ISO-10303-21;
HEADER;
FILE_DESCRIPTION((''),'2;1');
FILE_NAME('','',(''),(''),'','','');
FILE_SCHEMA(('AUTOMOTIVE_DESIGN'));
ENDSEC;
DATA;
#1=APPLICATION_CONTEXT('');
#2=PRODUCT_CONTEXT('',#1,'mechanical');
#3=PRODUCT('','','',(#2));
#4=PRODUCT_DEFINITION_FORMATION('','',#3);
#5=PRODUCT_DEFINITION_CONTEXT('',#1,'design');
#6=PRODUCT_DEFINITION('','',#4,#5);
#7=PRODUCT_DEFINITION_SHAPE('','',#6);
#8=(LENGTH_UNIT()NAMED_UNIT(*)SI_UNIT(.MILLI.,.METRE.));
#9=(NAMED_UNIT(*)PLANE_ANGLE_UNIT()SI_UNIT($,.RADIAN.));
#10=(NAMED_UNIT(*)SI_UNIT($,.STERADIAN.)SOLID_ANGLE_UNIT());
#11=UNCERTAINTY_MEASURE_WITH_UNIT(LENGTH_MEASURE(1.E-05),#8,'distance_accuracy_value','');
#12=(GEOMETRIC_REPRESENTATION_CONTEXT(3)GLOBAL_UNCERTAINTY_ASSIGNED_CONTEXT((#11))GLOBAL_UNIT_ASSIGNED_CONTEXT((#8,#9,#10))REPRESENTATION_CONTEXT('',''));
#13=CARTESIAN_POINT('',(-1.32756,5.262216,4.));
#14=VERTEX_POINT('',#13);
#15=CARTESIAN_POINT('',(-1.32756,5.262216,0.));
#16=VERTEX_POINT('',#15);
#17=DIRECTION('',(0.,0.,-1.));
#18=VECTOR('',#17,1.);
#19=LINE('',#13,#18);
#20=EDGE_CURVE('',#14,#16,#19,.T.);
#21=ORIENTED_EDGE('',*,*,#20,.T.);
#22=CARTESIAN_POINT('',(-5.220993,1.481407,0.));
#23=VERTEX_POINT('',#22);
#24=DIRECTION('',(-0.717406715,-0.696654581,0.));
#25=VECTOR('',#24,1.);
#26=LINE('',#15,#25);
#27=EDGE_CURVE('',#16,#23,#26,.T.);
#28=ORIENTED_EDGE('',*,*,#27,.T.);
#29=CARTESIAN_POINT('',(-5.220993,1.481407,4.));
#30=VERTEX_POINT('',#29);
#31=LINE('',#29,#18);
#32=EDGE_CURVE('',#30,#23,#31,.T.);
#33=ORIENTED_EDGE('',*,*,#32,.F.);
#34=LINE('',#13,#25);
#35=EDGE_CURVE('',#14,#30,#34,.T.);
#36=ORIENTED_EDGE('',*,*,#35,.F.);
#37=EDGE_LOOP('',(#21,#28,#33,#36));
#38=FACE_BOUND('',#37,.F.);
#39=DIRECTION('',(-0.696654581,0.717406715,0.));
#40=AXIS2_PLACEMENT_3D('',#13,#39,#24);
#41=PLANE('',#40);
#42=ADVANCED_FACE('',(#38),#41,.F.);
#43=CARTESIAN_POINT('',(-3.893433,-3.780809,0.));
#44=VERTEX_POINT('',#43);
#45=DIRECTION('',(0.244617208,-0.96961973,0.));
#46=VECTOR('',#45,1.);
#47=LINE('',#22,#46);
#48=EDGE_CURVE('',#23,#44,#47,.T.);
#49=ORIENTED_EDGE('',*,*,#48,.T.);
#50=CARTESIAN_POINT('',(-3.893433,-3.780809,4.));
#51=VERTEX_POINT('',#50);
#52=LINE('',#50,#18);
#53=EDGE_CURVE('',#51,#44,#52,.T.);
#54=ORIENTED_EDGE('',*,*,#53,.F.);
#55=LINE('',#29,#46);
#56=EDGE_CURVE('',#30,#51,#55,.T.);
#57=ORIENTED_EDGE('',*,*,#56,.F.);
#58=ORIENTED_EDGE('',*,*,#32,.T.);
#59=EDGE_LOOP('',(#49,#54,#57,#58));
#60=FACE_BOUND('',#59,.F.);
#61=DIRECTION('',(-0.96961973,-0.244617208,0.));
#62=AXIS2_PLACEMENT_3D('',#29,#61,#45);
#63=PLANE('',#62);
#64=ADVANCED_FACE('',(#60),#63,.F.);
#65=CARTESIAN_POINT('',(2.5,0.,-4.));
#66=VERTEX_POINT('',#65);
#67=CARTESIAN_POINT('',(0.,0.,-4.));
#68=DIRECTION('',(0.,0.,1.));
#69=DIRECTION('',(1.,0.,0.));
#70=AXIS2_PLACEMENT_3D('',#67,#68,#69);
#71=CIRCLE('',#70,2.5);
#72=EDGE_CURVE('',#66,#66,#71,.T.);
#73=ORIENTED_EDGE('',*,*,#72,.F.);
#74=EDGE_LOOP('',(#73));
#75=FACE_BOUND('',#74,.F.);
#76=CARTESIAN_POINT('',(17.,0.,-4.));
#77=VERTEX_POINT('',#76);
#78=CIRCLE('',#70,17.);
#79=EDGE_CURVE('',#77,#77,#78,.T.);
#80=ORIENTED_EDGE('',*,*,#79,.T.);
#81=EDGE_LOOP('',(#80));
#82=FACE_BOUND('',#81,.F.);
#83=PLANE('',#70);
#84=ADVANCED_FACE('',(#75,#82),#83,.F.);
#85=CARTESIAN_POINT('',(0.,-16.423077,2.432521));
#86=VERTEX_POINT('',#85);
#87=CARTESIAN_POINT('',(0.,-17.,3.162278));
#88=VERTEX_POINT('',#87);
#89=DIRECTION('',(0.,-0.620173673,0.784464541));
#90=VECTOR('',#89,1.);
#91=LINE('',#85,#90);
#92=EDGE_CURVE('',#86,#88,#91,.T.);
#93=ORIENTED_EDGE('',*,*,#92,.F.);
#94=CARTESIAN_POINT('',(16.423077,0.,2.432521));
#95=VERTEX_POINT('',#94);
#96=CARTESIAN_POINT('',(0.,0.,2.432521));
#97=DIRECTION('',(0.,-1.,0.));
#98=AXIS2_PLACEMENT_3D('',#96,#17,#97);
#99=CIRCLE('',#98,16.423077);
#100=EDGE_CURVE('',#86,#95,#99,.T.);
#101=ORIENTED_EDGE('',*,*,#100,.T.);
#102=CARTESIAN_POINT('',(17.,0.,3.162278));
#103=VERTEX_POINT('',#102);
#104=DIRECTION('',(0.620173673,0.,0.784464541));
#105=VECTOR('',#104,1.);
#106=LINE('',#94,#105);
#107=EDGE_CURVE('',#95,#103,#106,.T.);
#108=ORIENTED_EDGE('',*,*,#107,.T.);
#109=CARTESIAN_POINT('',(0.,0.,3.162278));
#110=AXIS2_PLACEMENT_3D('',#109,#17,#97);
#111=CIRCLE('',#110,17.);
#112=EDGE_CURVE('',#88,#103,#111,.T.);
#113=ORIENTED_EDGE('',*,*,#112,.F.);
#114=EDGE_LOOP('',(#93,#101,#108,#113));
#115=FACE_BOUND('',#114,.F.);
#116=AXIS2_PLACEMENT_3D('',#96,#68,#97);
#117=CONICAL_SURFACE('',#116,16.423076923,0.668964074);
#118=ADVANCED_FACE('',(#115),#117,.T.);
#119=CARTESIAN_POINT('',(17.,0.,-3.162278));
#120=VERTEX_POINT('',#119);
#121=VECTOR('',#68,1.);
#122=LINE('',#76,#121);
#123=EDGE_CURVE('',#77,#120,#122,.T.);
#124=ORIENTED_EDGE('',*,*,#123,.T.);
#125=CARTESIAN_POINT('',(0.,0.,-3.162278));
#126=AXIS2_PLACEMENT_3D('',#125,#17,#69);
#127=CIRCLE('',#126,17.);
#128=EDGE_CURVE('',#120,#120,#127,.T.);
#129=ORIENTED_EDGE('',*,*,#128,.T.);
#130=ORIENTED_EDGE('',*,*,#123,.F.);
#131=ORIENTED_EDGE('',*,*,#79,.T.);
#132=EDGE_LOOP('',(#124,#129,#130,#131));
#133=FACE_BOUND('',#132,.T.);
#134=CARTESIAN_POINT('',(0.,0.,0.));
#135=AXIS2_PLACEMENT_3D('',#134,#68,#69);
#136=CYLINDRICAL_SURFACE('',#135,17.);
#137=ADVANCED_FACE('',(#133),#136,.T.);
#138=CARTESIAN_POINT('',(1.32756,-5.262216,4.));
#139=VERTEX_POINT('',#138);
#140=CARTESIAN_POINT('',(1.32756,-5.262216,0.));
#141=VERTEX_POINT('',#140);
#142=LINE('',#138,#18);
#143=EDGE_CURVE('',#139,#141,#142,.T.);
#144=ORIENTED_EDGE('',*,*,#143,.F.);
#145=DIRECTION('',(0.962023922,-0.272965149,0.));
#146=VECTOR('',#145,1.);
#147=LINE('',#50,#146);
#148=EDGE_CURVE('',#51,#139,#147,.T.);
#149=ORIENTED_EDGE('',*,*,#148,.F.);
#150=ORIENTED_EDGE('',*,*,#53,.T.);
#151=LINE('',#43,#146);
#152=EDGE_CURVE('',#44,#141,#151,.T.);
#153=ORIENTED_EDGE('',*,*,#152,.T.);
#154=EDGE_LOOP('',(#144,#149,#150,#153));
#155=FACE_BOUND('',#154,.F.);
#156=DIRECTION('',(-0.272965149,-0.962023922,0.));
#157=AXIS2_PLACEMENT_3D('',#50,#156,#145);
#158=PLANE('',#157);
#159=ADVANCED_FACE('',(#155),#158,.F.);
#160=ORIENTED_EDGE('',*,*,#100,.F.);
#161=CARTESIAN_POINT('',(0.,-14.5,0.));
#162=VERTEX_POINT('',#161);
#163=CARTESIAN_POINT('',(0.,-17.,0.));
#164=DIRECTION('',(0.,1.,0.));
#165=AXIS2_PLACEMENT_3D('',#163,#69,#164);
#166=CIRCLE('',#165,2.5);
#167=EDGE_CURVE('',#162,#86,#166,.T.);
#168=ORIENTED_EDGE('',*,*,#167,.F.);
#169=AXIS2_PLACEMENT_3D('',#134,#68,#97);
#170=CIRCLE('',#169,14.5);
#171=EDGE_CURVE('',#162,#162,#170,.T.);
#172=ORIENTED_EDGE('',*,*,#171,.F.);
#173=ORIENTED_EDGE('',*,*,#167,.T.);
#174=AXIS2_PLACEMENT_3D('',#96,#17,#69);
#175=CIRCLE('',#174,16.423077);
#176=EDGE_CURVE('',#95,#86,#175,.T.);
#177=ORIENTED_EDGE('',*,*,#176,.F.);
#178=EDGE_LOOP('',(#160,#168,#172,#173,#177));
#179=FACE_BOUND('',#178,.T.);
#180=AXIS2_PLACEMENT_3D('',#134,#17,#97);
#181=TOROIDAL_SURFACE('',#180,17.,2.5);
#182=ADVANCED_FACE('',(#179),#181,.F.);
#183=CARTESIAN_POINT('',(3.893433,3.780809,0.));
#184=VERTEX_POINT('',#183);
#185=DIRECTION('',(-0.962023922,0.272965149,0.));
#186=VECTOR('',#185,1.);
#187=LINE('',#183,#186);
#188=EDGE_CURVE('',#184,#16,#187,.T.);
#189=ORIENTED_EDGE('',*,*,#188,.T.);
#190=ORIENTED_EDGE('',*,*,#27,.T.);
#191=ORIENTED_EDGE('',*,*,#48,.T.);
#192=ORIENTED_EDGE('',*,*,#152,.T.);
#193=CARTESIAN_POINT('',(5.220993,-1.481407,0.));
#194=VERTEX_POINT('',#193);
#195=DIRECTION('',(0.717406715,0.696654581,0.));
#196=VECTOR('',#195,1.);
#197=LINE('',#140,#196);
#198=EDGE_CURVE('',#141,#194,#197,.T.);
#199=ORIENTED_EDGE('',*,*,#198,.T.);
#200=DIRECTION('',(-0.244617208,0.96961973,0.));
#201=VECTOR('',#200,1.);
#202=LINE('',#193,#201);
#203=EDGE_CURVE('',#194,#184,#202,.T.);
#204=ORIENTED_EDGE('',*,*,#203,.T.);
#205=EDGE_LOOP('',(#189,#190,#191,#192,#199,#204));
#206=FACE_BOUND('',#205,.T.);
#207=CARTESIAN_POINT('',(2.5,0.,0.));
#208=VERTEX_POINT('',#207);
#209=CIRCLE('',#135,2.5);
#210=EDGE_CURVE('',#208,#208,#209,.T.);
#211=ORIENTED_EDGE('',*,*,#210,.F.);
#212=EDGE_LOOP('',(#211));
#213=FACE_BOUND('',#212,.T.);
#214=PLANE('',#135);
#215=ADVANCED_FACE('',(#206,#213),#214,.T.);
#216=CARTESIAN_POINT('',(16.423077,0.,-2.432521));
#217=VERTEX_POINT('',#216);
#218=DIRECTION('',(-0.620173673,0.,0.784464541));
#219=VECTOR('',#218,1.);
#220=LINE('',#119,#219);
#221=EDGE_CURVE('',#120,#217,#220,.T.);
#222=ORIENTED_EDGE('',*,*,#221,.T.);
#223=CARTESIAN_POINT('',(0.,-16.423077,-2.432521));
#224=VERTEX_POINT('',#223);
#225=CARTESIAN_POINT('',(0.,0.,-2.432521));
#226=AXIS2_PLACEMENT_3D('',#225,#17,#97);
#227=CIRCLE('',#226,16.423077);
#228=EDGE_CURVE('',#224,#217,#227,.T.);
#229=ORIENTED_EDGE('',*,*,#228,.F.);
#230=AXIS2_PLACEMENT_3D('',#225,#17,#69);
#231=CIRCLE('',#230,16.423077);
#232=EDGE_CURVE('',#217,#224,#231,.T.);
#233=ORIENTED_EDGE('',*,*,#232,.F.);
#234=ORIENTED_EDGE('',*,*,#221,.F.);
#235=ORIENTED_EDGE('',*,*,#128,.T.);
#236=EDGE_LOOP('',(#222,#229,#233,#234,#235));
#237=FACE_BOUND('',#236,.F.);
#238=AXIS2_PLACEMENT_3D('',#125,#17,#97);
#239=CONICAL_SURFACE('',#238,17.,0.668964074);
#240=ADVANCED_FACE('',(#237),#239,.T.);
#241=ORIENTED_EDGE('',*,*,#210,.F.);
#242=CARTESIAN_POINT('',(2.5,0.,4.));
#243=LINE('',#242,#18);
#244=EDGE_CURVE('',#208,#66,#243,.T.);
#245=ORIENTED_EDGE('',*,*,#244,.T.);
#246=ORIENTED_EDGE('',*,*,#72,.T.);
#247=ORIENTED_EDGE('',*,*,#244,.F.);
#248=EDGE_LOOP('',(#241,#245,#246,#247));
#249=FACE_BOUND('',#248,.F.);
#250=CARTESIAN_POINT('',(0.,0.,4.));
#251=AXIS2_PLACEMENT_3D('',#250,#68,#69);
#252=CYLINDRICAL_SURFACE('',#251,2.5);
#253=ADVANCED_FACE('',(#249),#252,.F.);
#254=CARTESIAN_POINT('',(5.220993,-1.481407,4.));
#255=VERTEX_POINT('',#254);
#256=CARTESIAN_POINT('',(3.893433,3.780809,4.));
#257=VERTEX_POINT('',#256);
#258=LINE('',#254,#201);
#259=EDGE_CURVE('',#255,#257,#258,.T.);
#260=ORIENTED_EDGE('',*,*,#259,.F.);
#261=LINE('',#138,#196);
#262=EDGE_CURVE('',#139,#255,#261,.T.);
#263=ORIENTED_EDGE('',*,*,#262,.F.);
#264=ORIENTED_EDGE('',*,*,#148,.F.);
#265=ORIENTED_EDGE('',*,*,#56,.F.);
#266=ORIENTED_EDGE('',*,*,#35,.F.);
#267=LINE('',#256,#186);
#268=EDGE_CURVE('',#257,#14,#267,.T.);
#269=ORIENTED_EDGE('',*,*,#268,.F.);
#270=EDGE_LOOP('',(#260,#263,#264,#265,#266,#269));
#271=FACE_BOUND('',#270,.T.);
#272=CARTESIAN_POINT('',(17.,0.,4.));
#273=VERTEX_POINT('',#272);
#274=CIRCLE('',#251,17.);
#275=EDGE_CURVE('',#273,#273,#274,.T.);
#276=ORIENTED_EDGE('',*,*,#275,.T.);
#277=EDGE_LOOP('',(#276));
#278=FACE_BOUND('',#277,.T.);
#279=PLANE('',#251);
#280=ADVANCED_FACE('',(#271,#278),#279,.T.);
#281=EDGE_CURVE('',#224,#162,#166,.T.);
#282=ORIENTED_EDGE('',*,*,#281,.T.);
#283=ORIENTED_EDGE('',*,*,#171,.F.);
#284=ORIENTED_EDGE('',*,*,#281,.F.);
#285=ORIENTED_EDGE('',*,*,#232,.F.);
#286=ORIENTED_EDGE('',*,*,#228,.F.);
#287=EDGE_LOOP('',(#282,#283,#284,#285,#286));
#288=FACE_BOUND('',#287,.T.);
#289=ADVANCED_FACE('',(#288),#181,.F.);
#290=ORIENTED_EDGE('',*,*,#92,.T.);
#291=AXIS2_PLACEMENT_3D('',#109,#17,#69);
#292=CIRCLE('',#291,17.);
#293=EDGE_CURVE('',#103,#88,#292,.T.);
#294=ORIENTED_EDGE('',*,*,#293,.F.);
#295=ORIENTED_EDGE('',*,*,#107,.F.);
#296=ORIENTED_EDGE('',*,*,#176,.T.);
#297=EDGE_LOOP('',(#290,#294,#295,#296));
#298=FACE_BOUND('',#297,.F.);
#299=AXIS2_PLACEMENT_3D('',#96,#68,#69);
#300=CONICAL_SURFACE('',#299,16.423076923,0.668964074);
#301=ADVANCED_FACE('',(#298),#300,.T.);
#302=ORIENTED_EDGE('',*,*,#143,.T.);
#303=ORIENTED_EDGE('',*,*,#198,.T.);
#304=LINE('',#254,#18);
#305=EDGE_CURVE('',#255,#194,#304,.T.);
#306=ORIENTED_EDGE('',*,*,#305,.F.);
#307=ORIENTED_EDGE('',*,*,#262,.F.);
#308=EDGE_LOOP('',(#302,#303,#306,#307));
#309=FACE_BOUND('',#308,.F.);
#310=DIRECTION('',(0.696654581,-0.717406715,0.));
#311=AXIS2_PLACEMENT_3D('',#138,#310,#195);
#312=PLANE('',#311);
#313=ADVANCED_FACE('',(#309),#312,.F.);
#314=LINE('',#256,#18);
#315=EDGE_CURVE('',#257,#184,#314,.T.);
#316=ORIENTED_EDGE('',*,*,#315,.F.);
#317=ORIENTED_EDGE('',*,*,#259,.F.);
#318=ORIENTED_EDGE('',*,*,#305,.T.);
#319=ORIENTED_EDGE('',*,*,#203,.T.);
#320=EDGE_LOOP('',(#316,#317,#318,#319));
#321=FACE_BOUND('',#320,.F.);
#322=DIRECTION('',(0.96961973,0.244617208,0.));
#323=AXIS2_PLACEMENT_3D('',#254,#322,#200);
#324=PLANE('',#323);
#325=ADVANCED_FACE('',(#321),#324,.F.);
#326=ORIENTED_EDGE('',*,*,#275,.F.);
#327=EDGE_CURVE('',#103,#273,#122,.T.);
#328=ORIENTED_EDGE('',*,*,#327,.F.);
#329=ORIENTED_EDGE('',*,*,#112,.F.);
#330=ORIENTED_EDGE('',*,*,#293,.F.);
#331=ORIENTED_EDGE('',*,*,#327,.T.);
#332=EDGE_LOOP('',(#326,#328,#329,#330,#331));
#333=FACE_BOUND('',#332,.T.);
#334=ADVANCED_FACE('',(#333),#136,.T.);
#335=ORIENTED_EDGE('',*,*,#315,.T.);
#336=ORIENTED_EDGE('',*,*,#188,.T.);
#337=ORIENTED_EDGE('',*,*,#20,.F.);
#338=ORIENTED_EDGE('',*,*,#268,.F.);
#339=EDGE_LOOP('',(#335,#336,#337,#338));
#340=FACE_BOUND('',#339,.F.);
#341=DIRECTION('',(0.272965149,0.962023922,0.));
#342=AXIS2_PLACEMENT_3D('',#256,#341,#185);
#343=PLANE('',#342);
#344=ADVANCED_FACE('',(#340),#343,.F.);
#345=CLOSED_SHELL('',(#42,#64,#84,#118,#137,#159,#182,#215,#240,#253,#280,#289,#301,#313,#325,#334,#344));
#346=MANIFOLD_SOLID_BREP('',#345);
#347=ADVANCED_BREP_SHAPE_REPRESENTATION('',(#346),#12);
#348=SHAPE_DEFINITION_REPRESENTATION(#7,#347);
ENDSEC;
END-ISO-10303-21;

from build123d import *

# Parameters (mm, degrees)
F0_R        = 17
F1_DEPTH    = 4
F2_R        = 2.5
F3_DEPTH    = 25
F5_DEPTH    = 4
F6_R        = 2.5
F8_T2_ANGLE = 270
F8_T4_ANGLE = 90
F8_T6_ANGLE = 90
F8_T8_ANGLE = 270


# Not quite as in the source:
# - a fillet or chamfer that OpenCascade refuses, or shapes differently, is made with other operations: its cross-section is extruded or revolved along the edge and cut away or added


with BuildPart() as f1:
    # F0 (on Top) → F1 (new body, symmetric)
    with BuildSketch(Plane.XY):
        Circle(F0_R)
    extrude(amount=F1_DEPTH, both=True)

    # F2 (on face) → F3 (cut)
    with BuildSketch(Plane.XY.offset(4)):
        Circle(F2_R)
    extrude(amount=-F3_DEPTH, mode=Mode.SUBTRACT)

    # F4 (on face) → F5 (cut)
    with BuildSketch(Plane.XY.offset(4)):
        Polygon((5.2209928438, -1.4814071211), (3.8934326221, 3.7808088751), (-1.3275602216, 5.2622159963), (-5.2209928438, 1.4814071211), (-3.8934326221, -3.7808088751), (1.3275602216, -5.2622159963), align=None)
    extrude(amount=-F5_DEPTH, mode=Mode.SUBTRACT)

    # F6 (on Right) → F7 (revolve, cut)
    with BuildSketch(Plane.YZ):
        with Locations((-17, 0)):
            Circle(F6_R)
    revolve(axis=Axis((0, 0, 0), (0, 0, 1)), mode=Mode.SUBTRACT)

    # F8: chamfer of 0.75 on 4 edges, made by hand

    # F8_s1 → F8_t2 (revolve, cut)
    with BuildSketch(Plane.YZ):
        with BuildLine():
            Line((-17, -3.1622776602), (-16.4230769231, -2.4325212771))
            ThreePointArc((-16.4230769231, -2.4325212771), (-16.6989227011, -2.4818042751), (-17, -2.5))
            Line((-17, -2.5), (-17, -3.1622776602))
        make_face()
    revolve(axis=Axis((0, 0, -2.5), (0, 0, -1)), revolution_arc=F8_T2_ANGLE, mode=Mode.SUBTRACT)

    # F8_s3 → F8_t4 (revolve, cut)
    with BuildSketch(Plane.XZ):
        with BuildLine():
            Line((17, -3.1622776602), (16.4230769231, -2.4325212771))
            ThreePointArc((16.4230769231, -2.4325212771), (16.6989227011, -2.4818042751), (17, -2.5))
            Line((17, -2.5), (17, -3.1622776602))
        make_face()
    revolve(axis=Axis((0, 0, -2.5), (0, 0, -1)), revolution_arc=F8_T4_ANGLE, mode=Mode.SUBTRACT)

    # F8_s5 → F8_t6 (revolve, cut)
    with BuildSketch(Plane.XZ):
        with BuildLine():
            Line((16.4230769231, 2.4325212771), (17, 3.1622776602))
            Line((17, 3.1622776602), (17, 2.5))
            ThreePointArc((17, 2.5), (16.6989227011, 2.4818042751), (16.4230769231, 2.4325212771))
        make_face()
    revolve(axis=Axis((0, 0, 2.5), (0, 0, -1)), revolution_arc=F8_T6_ANGLE, mode=Mode.SUBTRACT)

    # F8_s7 → F8_t8 (revolve, cut)
    with BuildSketch(Plane.YZ):
        with BuildLine():
            Line((-16.4230769231, 2.4325212771), (-17, 3.1622776602))
            Line((-17, 3.1622776602), (-17, 2.5))
            ThreePointArc((-17, 2.5), (-16.6989227011, 2.4818042751), (-16.4230769231, 2.4325212771))
        make_face()
    revolve(axis=Axis((0, 0, 2.5), (0, 0, -1)), revolution_arc=F8_T8_ANGLE, mode=Mode.SUBTRACT)


solid = f1.part
